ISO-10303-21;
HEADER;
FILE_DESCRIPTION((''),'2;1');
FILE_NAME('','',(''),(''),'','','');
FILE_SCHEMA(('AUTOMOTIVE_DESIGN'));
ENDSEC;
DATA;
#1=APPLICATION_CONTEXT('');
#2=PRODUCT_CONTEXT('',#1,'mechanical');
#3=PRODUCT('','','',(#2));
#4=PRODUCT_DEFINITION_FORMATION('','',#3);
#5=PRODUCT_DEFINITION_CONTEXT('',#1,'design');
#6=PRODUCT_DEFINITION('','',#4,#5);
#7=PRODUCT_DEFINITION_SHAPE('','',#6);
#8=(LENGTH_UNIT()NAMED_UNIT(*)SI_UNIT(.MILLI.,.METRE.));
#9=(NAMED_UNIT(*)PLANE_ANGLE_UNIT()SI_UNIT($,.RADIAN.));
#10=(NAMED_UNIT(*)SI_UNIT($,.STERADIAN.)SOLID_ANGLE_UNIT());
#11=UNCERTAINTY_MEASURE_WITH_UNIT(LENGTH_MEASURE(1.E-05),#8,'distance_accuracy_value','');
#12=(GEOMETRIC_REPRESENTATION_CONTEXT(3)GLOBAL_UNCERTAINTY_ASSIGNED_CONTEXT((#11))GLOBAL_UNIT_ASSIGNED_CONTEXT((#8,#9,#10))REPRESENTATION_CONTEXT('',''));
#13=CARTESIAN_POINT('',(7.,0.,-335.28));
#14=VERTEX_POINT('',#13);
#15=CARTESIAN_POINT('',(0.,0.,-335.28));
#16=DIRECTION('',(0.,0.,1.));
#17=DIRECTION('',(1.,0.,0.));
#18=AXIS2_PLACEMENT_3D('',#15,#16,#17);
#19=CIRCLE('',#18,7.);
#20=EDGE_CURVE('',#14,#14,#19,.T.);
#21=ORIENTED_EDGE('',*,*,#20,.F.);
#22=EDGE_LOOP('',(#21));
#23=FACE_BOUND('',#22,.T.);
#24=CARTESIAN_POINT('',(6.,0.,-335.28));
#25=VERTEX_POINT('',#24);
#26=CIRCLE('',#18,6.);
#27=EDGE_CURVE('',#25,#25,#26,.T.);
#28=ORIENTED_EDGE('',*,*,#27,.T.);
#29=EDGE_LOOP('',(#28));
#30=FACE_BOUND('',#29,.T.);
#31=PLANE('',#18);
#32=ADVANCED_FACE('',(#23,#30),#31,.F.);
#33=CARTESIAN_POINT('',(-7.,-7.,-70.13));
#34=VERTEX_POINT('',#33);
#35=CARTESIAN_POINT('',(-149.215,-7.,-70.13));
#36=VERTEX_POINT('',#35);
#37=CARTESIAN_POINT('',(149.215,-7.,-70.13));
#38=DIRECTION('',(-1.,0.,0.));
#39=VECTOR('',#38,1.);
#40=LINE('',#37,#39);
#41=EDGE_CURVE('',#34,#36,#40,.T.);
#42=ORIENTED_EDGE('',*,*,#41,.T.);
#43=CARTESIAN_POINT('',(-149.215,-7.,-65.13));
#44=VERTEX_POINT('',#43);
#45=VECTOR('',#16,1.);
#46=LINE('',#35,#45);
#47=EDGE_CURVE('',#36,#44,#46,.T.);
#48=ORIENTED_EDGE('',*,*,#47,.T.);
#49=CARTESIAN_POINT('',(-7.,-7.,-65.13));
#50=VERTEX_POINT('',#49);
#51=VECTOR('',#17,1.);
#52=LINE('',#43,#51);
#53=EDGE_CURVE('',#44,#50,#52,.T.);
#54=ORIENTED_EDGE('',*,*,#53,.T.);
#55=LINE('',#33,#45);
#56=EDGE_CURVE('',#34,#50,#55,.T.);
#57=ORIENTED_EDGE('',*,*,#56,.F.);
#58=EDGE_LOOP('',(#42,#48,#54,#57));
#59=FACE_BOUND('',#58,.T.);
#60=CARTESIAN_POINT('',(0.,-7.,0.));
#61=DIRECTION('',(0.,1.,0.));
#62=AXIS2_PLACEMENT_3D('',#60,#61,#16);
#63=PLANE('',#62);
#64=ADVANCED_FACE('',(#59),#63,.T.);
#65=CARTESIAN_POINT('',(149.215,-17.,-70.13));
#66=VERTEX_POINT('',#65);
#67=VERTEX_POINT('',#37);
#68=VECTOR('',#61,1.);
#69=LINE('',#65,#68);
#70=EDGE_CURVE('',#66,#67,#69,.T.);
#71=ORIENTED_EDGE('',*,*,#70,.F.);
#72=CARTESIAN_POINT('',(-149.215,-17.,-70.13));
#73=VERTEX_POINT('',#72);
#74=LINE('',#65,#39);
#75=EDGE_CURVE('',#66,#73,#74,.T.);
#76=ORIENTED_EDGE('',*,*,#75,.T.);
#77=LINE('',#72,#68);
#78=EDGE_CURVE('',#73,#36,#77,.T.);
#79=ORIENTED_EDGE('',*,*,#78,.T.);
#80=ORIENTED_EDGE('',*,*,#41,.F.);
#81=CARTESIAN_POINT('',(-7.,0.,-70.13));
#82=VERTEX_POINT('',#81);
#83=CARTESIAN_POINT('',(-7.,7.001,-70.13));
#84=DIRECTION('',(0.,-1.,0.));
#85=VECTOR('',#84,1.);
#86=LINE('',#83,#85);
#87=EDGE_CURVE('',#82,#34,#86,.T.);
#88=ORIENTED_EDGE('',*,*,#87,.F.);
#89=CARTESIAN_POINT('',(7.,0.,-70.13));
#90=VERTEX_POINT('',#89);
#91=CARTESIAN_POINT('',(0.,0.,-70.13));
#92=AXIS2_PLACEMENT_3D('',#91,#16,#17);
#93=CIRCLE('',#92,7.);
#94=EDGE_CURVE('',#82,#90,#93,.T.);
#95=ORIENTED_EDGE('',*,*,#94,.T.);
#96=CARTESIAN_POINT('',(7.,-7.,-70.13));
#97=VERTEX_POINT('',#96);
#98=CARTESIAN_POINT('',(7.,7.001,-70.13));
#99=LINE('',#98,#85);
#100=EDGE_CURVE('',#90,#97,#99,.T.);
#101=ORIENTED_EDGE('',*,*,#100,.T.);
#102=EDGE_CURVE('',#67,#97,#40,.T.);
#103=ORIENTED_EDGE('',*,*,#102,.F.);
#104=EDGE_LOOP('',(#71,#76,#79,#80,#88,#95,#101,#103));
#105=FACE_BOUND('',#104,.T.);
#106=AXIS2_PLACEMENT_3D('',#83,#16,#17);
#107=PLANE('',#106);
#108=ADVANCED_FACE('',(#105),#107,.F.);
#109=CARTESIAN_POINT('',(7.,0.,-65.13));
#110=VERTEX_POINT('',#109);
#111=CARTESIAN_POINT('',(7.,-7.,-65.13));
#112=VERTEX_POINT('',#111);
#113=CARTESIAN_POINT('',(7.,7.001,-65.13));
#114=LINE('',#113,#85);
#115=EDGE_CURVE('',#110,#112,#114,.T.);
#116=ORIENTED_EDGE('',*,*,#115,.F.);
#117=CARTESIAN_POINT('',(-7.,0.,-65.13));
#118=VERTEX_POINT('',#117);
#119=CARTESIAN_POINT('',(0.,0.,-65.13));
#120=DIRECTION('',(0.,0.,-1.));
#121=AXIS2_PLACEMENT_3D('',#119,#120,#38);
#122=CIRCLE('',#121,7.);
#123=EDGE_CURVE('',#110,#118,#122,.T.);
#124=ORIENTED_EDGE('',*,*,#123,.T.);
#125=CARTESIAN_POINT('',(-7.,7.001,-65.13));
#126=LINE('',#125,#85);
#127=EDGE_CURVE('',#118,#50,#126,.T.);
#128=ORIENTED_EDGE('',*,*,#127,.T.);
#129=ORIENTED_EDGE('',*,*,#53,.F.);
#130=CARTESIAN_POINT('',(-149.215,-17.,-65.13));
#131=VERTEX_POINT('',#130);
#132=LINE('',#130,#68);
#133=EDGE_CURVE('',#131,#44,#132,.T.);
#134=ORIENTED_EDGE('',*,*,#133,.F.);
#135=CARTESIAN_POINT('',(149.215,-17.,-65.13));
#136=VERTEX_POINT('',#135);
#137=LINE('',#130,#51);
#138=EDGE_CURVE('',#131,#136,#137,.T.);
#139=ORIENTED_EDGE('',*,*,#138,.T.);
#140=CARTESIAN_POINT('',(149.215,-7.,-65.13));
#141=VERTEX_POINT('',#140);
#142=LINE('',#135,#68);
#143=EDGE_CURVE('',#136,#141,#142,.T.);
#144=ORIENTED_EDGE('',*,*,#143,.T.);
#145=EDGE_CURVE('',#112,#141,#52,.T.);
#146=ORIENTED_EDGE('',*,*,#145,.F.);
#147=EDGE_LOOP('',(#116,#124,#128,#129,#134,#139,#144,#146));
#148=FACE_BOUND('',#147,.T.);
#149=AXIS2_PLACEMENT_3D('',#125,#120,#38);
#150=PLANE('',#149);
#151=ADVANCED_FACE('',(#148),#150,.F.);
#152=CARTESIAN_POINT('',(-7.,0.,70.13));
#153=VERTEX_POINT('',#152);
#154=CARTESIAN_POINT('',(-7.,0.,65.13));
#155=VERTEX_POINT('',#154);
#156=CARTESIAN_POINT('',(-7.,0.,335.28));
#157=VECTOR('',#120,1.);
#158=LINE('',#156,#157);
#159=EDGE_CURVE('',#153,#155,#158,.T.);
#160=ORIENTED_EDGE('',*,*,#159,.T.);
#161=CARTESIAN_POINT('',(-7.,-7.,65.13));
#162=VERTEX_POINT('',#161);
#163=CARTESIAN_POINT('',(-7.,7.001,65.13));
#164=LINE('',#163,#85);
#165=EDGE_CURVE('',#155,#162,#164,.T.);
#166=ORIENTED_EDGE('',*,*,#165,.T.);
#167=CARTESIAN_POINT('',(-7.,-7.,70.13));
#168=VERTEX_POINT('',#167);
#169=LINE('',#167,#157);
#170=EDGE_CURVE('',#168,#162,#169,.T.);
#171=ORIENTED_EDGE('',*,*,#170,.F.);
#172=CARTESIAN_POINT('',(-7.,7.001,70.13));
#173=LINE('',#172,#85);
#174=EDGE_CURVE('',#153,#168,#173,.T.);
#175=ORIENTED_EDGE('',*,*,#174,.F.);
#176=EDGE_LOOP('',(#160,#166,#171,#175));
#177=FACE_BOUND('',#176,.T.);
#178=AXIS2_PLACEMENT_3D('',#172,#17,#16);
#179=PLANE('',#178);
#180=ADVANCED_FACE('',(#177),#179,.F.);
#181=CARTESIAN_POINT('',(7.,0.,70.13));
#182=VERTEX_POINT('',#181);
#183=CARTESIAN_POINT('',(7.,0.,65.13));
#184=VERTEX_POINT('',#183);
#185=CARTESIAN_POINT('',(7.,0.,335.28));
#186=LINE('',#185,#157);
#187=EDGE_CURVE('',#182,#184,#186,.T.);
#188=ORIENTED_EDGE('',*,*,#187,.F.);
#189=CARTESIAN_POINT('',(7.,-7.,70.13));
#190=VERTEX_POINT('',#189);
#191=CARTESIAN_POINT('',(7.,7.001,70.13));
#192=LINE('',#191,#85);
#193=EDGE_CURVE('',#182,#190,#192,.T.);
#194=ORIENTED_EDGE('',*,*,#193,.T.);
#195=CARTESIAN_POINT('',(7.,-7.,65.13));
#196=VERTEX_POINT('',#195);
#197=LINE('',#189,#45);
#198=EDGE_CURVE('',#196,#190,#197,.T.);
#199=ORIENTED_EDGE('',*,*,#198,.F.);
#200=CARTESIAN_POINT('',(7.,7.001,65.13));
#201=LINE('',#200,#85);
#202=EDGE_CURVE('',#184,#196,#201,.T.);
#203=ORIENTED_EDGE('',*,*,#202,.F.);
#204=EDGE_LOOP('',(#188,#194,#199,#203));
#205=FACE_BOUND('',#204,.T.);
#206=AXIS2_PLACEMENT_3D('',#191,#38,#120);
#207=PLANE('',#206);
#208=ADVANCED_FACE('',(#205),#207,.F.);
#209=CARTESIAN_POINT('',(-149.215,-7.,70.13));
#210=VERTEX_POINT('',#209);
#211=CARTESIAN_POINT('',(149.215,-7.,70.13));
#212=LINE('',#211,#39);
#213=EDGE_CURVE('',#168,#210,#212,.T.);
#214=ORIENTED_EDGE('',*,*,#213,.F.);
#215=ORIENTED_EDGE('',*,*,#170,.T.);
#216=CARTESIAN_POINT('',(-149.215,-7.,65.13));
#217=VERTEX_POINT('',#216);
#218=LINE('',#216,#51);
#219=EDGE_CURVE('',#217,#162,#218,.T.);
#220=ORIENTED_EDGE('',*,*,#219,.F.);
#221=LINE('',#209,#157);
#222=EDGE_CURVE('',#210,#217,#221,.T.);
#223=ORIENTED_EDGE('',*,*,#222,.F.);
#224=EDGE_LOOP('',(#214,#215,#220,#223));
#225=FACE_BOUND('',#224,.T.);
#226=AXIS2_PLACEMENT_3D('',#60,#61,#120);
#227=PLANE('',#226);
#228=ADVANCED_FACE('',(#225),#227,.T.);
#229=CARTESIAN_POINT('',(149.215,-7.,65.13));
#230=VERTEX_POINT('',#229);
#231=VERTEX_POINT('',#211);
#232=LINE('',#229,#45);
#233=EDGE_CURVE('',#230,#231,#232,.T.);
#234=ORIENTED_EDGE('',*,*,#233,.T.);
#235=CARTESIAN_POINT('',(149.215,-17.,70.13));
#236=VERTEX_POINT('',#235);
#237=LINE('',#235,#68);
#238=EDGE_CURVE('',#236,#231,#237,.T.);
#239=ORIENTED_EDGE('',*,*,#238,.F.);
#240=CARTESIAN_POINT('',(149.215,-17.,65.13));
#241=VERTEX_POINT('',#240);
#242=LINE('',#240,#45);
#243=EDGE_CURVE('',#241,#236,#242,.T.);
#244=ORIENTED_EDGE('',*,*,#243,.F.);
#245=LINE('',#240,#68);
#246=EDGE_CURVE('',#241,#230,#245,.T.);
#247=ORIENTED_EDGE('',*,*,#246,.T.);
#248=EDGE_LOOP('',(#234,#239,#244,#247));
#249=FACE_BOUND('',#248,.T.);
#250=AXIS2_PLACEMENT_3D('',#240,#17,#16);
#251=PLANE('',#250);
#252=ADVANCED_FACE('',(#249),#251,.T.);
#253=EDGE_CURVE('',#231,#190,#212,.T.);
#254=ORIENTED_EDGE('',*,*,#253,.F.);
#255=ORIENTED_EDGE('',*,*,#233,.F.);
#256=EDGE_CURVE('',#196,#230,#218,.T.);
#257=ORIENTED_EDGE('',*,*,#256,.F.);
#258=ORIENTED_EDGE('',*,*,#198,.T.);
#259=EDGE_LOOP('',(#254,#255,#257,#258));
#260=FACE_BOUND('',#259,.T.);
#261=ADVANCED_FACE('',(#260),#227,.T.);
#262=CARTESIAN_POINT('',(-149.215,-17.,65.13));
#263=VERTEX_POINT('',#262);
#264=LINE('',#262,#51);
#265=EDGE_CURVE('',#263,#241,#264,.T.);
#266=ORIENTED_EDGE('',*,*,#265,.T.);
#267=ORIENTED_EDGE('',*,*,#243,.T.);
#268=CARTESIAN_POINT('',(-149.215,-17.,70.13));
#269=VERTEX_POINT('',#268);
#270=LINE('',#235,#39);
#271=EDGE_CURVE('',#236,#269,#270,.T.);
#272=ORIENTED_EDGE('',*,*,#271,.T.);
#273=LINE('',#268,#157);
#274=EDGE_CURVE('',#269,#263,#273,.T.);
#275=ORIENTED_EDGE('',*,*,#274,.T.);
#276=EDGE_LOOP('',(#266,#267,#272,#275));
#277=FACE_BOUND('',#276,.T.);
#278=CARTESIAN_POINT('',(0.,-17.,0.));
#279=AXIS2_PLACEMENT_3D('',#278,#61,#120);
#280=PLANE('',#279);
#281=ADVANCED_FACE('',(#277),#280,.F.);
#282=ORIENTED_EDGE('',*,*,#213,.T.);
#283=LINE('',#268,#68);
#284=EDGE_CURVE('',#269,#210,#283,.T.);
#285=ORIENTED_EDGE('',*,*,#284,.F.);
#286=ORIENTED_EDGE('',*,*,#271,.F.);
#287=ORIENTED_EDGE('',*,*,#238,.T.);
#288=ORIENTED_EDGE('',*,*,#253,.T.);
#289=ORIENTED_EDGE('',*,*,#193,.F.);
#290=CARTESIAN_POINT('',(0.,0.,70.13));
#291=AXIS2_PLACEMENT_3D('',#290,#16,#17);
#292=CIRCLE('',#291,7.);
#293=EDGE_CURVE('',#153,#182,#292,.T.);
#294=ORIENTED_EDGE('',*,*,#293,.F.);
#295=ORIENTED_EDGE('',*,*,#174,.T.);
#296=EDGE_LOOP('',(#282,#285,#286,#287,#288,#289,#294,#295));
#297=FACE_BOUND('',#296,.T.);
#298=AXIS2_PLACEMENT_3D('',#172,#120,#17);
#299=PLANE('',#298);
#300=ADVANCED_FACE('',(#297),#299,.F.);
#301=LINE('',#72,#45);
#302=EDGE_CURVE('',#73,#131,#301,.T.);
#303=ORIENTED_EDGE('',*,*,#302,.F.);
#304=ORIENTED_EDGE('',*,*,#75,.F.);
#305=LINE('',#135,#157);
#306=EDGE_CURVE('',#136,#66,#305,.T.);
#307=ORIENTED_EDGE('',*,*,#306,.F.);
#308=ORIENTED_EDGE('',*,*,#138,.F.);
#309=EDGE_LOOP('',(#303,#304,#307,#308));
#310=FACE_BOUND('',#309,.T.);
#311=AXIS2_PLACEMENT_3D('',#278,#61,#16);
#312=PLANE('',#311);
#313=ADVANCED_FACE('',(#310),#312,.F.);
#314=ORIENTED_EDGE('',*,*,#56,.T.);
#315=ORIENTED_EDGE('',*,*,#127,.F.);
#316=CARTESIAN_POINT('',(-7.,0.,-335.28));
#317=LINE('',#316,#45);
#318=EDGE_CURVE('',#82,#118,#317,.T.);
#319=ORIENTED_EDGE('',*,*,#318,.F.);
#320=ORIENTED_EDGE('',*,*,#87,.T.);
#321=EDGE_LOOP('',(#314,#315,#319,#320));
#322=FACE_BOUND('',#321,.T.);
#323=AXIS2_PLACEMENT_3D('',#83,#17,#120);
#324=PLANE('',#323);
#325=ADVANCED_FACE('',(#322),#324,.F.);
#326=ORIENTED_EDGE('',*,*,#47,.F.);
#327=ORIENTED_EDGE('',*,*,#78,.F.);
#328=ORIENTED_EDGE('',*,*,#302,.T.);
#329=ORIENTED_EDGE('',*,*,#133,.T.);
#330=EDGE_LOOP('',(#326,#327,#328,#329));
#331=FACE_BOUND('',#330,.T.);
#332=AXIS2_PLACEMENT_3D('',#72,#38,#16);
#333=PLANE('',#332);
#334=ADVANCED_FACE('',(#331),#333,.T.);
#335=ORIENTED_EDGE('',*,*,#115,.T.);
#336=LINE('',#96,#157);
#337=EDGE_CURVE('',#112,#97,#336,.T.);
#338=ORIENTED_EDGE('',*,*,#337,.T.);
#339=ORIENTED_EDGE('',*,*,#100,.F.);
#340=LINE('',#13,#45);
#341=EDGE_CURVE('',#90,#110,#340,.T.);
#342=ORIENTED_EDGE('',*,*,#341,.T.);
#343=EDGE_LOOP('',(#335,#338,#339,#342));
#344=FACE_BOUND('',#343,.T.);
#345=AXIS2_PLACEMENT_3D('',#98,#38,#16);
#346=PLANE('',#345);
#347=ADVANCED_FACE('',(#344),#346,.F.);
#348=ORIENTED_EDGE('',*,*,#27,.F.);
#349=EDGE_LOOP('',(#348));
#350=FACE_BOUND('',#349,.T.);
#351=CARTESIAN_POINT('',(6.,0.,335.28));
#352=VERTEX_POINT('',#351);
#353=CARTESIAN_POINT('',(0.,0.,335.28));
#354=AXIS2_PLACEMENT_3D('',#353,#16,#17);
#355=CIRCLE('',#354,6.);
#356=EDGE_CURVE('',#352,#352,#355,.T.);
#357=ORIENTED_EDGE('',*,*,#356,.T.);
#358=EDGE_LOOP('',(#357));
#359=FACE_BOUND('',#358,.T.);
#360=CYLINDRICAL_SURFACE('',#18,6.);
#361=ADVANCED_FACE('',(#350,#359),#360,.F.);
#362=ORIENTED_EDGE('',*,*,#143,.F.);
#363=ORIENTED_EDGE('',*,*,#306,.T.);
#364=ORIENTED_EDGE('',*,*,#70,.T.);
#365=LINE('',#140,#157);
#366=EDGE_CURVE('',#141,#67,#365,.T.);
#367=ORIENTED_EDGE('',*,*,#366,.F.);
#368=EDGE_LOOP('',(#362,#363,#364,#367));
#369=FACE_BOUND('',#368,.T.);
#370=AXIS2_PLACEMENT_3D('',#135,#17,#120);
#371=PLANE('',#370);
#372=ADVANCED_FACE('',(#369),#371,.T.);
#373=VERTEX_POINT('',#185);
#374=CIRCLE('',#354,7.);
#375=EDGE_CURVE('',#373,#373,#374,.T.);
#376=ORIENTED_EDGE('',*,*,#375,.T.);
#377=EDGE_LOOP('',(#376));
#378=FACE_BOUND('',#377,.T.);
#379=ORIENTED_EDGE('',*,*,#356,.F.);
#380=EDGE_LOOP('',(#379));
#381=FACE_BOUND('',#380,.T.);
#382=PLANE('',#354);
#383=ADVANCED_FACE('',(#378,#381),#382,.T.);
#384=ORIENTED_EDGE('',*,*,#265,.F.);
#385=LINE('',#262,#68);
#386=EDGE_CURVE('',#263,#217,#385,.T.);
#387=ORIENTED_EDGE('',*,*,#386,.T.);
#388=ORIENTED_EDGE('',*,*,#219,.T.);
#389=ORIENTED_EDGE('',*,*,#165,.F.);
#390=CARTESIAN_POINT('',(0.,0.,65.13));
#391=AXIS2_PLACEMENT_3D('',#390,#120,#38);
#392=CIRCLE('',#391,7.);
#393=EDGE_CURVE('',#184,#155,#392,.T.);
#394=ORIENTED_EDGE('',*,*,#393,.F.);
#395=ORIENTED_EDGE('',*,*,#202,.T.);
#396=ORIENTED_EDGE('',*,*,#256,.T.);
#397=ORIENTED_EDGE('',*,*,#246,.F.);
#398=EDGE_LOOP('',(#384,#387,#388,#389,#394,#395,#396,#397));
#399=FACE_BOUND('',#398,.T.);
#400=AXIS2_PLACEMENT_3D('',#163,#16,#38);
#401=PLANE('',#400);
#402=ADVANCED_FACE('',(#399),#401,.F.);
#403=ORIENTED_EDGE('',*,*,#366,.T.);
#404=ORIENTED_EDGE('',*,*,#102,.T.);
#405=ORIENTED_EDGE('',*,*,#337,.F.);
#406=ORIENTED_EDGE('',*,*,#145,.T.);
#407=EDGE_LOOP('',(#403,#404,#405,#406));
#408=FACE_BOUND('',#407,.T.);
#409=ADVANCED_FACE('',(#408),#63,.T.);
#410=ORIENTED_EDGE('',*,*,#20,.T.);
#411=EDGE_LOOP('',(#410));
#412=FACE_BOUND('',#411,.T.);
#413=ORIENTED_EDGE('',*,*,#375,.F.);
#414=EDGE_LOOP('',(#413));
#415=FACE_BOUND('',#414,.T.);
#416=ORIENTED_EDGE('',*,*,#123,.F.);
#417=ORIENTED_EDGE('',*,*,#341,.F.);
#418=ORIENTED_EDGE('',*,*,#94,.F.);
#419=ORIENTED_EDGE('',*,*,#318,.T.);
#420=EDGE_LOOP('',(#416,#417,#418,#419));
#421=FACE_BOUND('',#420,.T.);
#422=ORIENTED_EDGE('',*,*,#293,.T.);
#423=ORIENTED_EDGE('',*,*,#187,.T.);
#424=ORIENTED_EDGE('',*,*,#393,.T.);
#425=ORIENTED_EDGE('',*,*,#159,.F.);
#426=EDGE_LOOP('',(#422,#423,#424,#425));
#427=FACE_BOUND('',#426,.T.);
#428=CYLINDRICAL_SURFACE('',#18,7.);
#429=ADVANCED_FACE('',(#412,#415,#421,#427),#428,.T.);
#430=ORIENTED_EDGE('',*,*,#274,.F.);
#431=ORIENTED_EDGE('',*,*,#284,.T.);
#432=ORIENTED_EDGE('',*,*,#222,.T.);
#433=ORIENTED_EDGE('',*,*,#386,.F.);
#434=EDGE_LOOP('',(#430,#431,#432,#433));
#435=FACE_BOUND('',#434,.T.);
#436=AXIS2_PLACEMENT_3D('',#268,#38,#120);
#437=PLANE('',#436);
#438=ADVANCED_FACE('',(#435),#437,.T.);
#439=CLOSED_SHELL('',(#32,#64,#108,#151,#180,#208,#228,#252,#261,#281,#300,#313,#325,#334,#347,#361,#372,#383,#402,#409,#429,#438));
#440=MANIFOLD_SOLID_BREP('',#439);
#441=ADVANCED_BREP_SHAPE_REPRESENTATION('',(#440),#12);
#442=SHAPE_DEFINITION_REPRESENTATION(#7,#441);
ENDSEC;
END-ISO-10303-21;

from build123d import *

# Parameters (mm, degrees)
BOSS_EXTRUDE1_DEPTH      = 335.28
BOSS_EXTRUDE1_DEPTH_BACK = 335.28
SKETCH1_R                = 7
SKETCH1_R_2              = 6
SKETCH3_W                = 298.43
SKETCH3_H                = 5
BOSS_EXTRUDE2_DEPTH      = 10
BOSS_EXTRUDE3_START      = -70.13
BOSS_EXTRUDE3_DEPTH      = 5


with BuildPart() as part:
    # Sketch1 → Boss-Extrude1 (new, two sides: drawn at the far end of the back side and taken through both)
    with BuildSketch(Plane.XY.offset(-BOSS_EXTRUDE1_DEPTH_BACK)):
        Circle(SKETCH1_R)
        Circle(SKETCH1_R_2, mode=Mode.SUBTRACT)
    extrude(amount=BOSS_EXTRUDE1_DEPTH + BOSS_EXTRUDE1_DEPTH_BACK)



with BuildPart() as body_2:
    # Sketch3 → Boss-Extrude2 (new body)
    with BuildSketch(Plane(origin=(0, -7, 0), x_dir=(1, 0, 0), z_dir=(0, 1, 0))):
        with Locations((0, 67.63)):
            Rectangle(SKETCH3_W, SKETCH3_H)
    boss_extrude2 = extrude(amount=-BOSS_EXTRUDE2_DEPTH)


with BuildPart() as part_1:
    add(part.part)

    add(body_2.part)  # Boss-Extrude3 merges body 2
    # Boss-Extrude3: read off the stored shape, not the designer's step
    # Boss-Extrude3 outline → Boss-Extrude3 (add)
    with BuildSketch(Plane.XY.offset(BOSS_EXTRUDE3_START)):
        with BuildLine():
            Line((7, -7), (7, 0))
            ThreePointArc((7, 0), (4.94974746, -4.949747477), (-2.4e-08, -7))
            Line((-2.4e-08, -7), (7, -7))
        make_face()
        with BuildLine():
            ThreePointArc((-2.4e-08, -7), (-4.949747477, -4.94974746), (-7, 0))
            Line((-7, 0), (-7, -7))
            Line((-7, -7), (-2.4e-08, -7))
        make_face()
    boss_extrude3 = extrude(amount=BOSS_EXTRUDE3_DEPTH)

    # Mirror12: Boss-Extrude2, Boss-Extrude3 across plane
    add(boss_extrude2.mirror(Plane.XY))
    add(boss_extrude3.mirror(Plane.XY))


solid = part_1.part
